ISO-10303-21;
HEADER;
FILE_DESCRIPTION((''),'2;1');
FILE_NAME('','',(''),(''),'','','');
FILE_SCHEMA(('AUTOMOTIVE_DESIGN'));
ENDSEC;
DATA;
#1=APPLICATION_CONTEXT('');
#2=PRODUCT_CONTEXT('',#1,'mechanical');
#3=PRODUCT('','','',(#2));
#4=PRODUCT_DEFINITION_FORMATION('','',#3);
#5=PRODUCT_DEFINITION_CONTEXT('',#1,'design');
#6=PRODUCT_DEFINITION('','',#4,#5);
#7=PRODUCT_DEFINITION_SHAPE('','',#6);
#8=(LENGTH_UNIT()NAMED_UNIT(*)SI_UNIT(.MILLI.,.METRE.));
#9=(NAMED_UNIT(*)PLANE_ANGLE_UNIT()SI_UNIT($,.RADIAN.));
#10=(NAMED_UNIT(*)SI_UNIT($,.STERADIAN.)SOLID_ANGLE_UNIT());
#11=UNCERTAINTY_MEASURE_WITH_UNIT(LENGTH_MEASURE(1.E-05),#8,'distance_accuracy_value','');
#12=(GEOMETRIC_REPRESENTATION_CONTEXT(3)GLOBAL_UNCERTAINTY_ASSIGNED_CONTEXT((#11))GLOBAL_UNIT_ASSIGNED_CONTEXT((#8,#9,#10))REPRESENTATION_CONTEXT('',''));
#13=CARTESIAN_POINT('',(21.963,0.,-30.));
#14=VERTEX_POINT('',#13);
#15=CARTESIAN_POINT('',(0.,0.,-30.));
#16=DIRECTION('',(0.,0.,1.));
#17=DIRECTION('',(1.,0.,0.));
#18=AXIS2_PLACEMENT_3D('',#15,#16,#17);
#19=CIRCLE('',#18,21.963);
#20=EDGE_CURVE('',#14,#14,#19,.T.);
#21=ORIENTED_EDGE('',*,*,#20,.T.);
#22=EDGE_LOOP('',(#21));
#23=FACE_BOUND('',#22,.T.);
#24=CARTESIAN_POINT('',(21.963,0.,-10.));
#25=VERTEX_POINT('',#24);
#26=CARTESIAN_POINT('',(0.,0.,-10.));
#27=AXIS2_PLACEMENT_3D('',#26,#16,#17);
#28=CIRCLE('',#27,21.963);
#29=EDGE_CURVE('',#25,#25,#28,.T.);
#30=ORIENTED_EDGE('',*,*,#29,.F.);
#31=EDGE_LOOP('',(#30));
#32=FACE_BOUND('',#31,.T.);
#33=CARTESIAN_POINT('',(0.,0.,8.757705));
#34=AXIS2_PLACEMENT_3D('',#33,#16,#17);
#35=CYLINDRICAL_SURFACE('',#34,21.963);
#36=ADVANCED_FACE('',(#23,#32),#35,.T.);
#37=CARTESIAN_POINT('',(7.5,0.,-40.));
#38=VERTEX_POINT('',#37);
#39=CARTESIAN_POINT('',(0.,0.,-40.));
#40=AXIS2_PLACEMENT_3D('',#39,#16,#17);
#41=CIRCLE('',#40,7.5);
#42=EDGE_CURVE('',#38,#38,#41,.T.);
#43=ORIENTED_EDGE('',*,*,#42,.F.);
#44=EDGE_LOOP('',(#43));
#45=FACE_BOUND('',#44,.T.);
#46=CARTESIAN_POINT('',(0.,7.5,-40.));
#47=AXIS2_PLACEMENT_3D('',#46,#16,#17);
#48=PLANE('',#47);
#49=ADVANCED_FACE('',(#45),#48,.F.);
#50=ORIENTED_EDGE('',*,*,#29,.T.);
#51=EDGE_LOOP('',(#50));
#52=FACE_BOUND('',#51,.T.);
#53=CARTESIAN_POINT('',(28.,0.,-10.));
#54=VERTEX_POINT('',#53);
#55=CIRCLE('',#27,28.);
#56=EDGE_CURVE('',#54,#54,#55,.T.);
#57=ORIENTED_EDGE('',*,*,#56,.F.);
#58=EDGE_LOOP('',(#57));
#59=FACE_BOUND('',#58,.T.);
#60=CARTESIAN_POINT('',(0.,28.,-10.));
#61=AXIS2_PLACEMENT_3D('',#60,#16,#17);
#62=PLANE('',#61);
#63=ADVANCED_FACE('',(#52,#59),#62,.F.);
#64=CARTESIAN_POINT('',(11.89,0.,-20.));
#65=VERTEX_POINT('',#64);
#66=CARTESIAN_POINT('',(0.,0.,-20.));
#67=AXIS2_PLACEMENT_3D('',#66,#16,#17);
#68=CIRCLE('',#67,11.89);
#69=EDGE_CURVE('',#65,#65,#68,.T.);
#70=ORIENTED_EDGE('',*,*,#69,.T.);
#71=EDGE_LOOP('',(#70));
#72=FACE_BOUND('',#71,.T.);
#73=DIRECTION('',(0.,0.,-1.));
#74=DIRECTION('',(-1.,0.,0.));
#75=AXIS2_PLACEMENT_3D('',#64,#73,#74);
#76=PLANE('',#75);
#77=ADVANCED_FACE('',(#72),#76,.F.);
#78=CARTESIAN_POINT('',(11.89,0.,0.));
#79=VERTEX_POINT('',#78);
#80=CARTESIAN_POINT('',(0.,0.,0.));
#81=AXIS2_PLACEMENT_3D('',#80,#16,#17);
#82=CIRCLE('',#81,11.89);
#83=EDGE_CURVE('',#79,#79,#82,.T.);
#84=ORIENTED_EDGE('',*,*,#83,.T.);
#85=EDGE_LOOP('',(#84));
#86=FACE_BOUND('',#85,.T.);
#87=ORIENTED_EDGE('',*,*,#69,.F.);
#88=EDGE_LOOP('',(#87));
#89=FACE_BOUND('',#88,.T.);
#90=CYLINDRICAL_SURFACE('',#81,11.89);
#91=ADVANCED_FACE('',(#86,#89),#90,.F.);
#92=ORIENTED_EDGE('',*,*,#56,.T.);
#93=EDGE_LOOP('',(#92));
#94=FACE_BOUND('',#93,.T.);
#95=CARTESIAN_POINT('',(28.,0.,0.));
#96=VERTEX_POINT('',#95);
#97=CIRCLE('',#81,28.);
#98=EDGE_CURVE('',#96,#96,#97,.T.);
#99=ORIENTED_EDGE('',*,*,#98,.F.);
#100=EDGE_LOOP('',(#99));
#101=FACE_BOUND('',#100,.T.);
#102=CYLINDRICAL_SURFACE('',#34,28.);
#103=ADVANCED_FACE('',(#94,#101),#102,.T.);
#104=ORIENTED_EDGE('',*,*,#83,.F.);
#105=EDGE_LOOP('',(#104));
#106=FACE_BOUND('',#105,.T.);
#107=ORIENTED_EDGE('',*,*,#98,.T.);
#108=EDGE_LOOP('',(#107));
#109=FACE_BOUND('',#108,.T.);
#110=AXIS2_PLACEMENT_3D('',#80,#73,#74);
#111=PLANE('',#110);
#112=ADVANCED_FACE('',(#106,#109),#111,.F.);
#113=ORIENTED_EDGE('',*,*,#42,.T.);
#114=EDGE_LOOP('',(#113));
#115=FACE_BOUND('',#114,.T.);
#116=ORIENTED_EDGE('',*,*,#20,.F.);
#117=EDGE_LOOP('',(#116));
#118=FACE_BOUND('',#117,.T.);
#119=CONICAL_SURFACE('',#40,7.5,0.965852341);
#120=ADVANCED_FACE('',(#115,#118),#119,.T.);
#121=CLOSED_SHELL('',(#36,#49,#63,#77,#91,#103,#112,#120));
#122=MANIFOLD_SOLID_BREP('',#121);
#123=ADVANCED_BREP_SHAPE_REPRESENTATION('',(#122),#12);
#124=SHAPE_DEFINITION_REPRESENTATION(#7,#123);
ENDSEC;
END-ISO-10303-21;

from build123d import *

# Parameters (mm, degrees)
TALADROAVANZADO1_START     = -20
TALADROAVANZADO1_OUTLINE_R = 11.89
TALADROAVANZADO1_DEPTH     = 20


# Read off the part's stored shape, not the designer's step: TaladroAvanzado1
with BuildPart() as part:
    # Croquis1 → Revolución1 (revolve)
    with BuildSketch(Plane(origin=(0, 0, 0), x_dir=(0, 0, -1), z_dir=(1, 0, 0)), mode=Mode.PRIVATE) as revoluci_n1_sk:
        Polygon((0, 0), (0, 28), (10, 28), (10, 21.963), (30, 21.963), (40, 7.5), (40, 0), align=None)
    revolve(revoluci_n1_sk.sketch.rotate(Axis((0, 0, 8.757704884), (0, 0, -1)), 90), axis=Axis((0, 0, 8.757704884), (0, 0, -1)))

    # TaladroAvanzado1 outline → TaladroAvanzado1 (cut)
    with BuildSketch(Plane.XY.offset(TALADROAVANZADO1_START)):
        Circle(TALADROAVANZADO1_OUTLINE_R)
    extrude(amount=TALADROAVANZADO1_DEPTH, mode=Mode.SUBTRACT)


solid = part.part
